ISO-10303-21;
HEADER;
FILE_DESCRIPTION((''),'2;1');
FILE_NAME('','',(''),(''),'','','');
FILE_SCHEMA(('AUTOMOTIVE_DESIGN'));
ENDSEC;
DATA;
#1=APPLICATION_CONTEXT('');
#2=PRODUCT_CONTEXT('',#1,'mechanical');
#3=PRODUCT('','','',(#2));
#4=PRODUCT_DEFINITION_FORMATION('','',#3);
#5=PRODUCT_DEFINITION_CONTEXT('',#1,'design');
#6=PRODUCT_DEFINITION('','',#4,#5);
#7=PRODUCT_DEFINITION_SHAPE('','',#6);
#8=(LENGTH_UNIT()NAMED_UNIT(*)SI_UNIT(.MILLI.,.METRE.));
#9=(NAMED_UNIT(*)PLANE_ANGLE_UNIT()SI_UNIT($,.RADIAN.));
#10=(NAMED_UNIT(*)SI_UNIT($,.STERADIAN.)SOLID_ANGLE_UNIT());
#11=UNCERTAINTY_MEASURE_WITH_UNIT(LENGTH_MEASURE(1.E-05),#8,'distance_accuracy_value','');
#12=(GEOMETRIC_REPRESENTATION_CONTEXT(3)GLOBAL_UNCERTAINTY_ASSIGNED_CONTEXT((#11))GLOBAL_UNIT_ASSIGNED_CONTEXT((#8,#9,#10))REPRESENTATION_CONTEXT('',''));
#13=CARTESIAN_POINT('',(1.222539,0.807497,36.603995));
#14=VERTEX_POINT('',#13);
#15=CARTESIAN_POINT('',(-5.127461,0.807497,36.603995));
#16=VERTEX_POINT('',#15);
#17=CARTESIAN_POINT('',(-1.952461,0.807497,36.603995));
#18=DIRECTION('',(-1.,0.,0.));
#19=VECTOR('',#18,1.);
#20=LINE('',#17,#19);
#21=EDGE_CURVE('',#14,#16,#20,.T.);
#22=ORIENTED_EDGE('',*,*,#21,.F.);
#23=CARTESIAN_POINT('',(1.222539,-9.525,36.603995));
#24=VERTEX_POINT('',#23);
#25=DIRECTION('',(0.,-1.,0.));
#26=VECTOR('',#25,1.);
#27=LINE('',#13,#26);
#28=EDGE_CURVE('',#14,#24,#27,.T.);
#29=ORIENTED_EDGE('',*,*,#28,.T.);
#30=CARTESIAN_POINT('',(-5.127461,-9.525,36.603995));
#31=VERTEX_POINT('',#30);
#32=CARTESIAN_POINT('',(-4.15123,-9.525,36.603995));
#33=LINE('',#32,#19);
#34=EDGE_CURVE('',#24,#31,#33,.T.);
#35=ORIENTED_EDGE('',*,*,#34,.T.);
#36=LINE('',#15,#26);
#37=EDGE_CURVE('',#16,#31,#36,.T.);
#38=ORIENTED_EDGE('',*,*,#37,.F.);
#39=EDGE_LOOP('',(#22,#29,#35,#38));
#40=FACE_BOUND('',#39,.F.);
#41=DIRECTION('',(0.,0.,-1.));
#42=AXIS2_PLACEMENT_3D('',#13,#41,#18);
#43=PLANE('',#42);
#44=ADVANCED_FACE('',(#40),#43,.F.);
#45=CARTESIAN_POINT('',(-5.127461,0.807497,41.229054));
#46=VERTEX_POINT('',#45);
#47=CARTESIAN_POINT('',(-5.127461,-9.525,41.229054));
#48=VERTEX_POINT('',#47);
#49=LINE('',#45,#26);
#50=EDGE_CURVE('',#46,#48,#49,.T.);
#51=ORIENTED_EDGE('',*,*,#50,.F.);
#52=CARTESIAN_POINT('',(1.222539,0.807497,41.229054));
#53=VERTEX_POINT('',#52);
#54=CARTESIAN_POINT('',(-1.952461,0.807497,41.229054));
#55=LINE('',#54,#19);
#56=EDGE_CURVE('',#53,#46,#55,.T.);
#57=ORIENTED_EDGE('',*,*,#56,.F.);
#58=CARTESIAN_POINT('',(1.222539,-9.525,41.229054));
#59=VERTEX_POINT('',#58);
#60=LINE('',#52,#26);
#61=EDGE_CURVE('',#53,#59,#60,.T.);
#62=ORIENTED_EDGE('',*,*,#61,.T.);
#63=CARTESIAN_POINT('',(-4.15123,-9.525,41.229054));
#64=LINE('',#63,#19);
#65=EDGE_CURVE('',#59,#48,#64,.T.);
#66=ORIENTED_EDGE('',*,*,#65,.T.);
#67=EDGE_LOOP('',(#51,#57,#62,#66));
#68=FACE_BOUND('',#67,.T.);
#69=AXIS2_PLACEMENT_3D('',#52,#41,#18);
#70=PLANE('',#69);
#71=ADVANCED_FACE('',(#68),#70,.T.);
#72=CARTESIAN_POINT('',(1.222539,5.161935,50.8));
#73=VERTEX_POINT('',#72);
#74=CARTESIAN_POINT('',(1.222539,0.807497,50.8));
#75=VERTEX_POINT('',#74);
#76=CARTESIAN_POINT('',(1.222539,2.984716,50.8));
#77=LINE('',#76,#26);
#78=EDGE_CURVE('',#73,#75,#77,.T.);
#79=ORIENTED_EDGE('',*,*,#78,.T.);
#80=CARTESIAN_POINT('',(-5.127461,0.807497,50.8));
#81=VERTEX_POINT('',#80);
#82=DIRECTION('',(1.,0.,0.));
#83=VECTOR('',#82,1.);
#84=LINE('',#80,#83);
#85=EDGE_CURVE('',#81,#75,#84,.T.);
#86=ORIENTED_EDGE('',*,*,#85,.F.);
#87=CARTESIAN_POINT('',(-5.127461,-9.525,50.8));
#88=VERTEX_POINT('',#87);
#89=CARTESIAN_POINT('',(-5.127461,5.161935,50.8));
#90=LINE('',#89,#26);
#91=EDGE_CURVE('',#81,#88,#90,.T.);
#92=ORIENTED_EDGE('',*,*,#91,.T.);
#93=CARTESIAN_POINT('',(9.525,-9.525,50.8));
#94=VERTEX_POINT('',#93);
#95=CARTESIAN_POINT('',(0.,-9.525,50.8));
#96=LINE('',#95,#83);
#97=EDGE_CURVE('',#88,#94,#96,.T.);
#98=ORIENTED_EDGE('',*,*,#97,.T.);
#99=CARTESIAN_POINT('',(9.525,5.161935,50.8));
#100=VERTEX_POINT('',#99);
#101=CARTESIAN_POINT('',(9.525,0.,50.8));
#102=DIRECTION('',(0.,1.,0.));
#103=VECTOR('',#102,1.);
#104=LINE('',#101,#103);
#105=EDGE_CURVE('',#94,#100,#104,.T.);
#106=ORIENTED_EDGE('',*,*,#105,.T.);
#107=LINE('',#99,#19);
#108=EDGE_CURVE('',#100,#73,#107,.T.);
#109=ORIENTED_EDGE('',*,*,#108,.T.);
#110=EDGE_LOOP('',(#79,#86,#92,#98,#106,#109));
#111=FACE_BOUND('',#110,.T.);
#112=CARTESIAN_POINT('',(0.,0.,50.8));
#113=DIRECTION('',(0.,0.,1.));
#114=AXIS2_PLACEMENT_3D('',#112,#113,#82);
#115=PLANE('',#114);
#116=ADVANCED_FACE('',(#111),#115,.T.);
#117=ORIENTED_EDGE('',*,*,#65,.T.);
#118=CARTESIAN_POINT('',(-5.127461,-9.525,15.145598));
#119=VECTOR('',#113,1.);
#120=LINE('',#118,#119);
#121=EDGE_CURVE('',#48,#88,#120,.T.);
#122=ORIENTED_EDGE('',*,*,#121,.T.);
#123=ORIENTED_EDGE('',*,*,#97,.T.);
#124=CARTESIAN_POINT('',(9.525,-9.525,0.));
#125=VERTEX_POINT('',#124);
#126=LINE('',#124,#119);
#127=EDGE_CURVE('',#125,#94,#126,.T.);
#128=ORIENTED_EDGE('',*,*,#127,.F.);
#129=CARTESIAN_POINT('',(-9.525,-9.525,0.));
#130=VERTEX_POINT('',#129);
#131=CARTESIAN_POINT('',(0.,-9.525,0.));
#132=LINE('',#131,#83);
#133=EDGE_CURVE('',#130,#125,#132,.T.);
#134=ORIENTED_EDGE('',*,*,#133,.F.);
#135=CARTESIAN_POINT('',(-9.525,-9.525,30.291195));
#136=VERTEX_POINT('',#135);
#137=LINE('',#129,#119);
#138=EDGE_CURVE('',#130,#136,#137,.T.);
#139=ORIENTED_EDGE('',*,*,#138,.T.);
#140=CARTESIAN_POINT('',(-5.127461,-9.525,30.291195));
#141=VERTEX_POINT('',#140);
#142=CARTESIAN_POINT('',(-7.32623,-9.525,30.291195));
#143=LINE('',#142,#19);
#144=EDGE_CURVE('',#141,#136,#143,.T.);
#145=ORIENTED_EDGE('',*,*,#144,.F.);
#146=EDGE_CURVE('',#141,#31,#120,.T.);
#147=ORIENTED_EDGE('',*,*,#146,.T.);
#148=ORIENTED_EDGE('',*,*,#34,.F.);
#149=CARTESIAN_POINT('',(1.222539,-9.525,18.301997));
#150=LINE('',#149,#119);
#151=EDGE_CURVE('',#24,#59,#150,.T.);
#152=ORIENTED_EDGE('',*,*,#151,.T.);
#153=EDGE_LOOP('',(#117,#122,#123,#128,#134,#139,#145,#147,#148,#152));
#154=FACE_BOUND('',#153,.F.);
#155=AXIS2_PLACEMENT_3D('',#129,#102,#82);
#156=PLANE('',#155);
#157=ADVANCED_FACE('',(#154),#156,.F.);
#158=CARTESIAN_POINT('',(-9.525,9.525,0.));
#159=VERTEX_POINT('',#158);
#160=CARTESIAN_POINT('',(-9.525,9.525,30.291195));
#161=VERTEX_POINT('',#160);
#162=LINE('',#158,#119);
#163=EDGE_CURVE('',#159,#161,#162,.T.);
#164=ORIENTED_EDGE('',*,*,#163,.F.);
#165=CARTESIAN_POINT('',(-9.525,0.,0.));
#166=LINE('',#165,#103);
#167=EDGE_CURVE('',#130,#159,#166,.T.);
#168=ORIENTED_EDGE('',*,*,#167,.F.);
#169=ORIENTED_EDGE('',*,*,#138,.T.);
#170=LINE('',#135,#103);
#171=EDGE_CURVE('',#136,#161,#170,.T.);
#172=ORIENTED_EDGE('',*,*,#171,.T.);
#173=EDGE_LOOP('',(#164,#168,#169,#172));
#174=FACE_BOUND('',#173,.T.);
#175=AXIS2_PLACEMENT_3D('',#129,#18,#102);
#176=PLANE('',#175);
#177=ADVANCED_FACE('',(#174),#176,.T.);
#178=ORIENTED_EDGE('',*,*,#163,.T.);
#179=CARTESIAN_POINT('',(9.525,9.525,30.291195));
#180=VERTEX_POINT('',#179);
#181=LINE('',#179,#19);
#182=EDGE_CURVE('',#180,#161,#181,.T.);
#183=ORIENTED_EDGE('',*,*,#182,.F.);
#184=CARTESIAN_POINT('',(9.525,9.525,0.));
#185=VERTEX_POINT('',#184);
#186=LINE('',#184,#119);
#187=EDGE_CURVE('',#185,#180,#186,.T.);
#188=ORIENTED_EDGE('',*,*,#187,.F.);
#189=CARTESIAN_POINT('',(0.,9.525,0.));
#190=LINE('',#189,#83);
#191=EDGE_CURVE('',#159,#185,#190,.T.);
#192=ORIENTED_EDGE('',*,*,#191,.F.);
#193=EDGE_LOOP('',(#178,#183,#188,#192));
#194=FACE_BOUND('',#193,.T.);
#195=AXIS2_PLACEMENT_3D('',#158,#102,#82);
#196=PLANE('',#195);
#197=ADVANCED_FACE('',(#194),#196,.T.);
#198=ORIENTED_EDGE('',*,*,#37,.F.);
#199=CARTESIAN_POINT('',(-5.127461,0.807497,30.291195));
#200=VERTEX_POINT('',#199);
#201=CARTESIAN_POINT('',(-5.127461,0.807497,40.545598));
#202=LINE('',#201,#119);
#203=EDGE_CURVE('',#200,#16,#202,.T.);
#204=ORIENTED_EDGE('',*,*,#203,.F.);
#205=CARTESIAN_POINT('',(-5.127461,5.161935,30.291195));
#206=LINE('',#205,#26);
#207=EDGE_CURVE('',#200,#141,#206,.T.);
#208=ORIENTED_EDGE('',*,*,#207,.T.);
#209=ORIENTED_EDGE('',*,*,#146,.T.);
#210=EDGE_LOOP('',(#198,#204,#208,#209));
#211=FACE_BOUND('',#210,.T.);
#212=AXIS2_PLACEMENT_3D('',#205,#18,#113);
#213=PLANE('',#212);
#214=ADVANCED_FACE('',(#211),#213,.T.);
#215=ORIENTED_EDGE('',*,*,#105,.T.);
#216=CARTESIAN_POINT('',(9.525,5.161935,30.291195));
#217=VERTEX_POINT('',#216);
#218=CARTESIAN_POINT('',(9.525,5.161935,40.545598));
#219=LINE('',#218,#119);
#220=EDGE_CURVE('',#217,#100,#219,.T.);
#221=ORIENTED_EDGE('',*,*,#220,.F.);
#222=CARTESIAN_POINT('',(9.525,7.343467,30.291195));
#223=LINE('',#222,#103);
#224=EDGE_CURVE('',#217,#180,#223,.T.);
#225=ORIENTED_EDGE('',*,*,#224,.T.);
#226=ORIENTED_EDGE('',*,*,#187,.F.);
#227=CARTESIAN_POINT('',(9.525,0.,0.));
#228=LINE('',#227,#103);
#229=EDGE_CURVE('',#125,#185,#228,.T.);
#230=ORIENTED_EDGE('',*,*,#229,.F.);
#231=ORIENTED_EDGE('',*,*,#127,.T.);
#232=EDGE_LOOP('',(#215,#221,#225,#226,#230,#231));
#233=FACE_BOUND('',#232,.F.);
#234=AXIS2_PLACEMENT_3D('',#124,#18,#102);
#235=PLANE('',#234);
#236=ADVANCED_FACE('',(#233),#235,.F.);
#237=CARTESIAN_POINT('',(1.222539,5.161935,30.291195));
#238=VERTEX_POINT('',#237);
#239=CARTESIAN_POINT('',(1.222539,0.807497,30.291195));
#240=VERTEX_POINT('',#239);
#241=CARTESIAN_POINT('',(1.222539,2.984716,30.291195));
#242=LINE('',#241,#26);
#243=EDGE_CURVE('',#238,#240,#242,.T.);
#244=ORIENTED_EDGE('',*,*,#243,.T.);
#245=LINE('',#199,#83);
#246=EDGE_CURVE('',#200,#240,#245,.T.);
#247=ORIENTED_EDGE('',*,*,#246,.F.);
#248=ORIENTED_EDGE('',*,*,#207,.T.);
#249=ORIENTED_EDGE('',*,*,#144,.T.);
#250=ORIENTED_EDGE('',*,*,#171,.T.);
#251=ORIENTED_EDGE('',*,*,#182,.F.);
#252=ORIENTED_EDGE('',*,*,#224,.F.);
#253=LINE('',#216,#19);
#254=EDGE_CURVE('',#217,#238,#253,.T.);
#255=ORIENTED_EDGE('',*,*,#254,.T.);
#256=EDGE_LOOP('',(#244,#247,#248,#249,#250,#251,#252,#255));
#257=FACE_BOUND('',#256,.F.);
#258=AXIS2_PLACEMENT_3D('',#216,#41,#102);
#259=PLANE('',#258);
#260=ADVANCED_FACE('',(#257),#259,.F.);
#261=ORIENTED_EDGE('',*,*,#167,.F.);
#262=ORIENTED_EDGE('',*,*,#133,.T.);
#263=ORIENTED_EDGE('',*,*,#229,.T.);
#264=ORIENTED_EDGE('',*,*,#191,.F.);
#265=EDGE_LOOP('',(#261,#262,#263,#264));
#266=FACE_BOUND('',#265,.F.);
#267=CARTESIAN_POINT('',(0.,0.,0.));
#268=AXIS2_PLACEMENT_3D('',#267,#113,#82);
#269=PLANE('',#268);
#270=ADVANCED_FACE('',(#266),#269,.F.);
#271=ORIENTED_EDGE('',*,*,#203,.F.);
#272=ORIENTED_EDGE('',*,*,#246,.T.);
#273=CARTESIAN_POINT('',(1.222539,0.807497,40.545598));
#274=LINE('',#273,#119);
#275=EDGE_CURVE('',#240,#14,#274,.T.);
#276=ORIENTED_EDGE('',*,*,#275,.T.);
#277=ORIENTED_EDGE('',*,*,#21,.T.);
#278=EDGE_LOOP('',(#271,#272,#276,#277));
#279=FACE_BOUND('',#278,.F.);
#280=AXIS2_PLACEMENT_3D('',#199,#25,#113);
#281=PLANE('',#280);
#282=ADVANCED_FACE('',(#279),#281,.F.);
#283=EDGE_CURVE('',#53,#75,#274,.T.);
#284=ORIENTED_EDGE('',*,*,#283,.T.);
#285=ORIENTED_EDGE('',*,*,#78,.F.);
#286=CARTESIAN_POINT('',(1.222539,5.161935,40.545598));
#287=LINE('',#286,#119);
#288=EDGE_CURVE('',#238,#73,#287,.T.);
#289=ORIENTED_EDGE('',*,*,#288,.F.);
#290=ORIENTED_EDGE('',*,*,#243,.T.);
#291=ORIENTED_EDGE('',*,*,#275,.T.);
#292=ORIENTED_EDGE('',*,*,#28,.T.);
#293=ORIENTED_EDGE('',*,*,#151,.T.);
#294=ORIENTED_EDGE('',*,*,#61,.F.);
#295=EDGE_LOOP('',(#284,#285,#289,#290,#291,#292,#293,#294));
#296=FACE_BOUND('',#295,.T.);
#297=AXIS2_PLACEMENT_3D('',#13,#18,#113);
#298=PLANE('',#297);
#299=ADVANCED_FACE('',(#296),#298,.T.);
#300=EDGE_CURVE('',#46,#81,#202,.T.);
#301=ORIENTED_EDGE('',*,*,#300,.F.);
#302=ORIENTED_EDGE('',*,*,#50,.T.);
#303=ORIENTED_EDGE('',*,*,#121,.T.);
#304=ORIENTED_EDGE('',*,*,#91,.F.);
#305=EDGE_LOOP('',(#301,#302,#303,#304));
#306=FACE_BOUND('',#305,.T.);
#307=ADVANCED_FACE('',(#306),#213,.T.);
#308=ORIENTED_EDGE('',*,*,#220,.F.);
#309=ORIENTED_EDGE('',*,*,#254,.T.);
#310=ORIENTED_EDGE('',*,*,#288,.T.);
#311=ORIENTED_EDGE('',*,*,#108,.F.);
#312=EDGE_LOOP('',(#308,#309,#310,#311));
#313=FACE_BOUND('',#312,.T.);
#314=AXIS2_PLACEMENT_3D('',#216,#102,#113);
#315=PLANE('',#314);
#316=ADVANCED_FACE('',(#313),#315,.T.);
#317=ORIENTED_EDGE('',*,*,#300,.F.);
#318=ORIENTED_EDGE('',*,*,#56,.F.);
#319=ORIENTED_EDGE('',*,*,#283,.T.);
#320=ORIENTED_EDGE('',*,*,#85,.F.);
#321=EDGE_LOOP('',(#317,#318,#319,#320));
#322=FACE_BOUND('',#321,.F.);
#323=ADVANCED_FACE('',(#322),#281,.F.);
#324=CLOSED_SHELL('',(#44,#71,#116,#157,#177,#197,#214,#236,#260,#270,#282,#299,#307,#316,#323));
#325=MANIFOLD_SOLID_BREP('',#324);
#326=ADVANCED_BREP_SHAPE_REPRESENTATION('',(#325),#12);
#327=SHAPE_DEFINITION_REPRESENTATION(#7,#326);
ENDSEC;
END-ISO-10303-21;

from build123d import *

# Parameters (mm, degrees)
F0_W     = 19.05
F0_H     = 19.05
F1_DEPTH = 50.8
F2_W     = 4.3630654678
F2_H     = 20.508804819
F3_DEPTH = 25.4
F4_W     = 4.3975393042
F4_H     = 20.508804819
F5_DEPTH = 25.4
F6_W     = 4.3544375803
F6_H     = 20.508804819
F7_DEPTH = 6.35
F8_W     = 6.35
F8_H     = 4.6250596642
F9_DEPTH = 25.4


# Not quite as in the source:
# - a feature names something its author has since deleted; it is built from what else it names


with BuildPart() as f1:
    # F0 (on Top) → F1 (new body)
    with BuildSketch(Plane.XY):
        Rectangle(F0_W, F0_H)
    extrude(amount=F1_DEPTH)

    # F2 (on face) → F3 (cut)
    with BuildSketch(Plane.YZ.offset(9.525)):
        with Locations((7.3434672661, 40.5455975905)):
            Rectangle(F2_W, F2_H)
    extrude(amount=-F3_DEPTH, mode=Mode.SUBTRACT)

    # F4 (on face) → F5 (cut)
    with BuildSketch(Plane(origin=(0, 5.1619345322, 0), x_dir=(-1, 0, 0), z_dir=(0, 1, 0))):
        with Locations((7.3262303479, 40.5455975905)):
            Rectangle(F4_W, F4_H)
    extrude(amount=-F5_DEPTH, mode=Mode.SUBTRACT)

    # F6 (on face) → F7 (cut)
    with BuildSketch(Plane(origin=(-5.1274606958, 0, 0), x_dir=(0, -1, 0), z_dir=(-1, 0, 0))):
        with Locations((-2.9847157421, 40.5455975905)):
            Rectangle(F6_W, F6_H)
    extrude(amount=-F7_DEPTH, mode=Mode.SUBTRACT)

    # F8 (on face) → F9 (cut)
    with BuildSketch(Plane(origin=(0, 0.8074969519, 0), x_dir=(-1, 0, 0), z_dir=(0, 1, 0))):
        with Locations((1.9524606958, 38.9165244997)):
            Rectangle(F8_W, F8_H)
    extrude(amount=-F9_DEPTH, mode=Mode.SUBTRACT)


solid = f1.part
